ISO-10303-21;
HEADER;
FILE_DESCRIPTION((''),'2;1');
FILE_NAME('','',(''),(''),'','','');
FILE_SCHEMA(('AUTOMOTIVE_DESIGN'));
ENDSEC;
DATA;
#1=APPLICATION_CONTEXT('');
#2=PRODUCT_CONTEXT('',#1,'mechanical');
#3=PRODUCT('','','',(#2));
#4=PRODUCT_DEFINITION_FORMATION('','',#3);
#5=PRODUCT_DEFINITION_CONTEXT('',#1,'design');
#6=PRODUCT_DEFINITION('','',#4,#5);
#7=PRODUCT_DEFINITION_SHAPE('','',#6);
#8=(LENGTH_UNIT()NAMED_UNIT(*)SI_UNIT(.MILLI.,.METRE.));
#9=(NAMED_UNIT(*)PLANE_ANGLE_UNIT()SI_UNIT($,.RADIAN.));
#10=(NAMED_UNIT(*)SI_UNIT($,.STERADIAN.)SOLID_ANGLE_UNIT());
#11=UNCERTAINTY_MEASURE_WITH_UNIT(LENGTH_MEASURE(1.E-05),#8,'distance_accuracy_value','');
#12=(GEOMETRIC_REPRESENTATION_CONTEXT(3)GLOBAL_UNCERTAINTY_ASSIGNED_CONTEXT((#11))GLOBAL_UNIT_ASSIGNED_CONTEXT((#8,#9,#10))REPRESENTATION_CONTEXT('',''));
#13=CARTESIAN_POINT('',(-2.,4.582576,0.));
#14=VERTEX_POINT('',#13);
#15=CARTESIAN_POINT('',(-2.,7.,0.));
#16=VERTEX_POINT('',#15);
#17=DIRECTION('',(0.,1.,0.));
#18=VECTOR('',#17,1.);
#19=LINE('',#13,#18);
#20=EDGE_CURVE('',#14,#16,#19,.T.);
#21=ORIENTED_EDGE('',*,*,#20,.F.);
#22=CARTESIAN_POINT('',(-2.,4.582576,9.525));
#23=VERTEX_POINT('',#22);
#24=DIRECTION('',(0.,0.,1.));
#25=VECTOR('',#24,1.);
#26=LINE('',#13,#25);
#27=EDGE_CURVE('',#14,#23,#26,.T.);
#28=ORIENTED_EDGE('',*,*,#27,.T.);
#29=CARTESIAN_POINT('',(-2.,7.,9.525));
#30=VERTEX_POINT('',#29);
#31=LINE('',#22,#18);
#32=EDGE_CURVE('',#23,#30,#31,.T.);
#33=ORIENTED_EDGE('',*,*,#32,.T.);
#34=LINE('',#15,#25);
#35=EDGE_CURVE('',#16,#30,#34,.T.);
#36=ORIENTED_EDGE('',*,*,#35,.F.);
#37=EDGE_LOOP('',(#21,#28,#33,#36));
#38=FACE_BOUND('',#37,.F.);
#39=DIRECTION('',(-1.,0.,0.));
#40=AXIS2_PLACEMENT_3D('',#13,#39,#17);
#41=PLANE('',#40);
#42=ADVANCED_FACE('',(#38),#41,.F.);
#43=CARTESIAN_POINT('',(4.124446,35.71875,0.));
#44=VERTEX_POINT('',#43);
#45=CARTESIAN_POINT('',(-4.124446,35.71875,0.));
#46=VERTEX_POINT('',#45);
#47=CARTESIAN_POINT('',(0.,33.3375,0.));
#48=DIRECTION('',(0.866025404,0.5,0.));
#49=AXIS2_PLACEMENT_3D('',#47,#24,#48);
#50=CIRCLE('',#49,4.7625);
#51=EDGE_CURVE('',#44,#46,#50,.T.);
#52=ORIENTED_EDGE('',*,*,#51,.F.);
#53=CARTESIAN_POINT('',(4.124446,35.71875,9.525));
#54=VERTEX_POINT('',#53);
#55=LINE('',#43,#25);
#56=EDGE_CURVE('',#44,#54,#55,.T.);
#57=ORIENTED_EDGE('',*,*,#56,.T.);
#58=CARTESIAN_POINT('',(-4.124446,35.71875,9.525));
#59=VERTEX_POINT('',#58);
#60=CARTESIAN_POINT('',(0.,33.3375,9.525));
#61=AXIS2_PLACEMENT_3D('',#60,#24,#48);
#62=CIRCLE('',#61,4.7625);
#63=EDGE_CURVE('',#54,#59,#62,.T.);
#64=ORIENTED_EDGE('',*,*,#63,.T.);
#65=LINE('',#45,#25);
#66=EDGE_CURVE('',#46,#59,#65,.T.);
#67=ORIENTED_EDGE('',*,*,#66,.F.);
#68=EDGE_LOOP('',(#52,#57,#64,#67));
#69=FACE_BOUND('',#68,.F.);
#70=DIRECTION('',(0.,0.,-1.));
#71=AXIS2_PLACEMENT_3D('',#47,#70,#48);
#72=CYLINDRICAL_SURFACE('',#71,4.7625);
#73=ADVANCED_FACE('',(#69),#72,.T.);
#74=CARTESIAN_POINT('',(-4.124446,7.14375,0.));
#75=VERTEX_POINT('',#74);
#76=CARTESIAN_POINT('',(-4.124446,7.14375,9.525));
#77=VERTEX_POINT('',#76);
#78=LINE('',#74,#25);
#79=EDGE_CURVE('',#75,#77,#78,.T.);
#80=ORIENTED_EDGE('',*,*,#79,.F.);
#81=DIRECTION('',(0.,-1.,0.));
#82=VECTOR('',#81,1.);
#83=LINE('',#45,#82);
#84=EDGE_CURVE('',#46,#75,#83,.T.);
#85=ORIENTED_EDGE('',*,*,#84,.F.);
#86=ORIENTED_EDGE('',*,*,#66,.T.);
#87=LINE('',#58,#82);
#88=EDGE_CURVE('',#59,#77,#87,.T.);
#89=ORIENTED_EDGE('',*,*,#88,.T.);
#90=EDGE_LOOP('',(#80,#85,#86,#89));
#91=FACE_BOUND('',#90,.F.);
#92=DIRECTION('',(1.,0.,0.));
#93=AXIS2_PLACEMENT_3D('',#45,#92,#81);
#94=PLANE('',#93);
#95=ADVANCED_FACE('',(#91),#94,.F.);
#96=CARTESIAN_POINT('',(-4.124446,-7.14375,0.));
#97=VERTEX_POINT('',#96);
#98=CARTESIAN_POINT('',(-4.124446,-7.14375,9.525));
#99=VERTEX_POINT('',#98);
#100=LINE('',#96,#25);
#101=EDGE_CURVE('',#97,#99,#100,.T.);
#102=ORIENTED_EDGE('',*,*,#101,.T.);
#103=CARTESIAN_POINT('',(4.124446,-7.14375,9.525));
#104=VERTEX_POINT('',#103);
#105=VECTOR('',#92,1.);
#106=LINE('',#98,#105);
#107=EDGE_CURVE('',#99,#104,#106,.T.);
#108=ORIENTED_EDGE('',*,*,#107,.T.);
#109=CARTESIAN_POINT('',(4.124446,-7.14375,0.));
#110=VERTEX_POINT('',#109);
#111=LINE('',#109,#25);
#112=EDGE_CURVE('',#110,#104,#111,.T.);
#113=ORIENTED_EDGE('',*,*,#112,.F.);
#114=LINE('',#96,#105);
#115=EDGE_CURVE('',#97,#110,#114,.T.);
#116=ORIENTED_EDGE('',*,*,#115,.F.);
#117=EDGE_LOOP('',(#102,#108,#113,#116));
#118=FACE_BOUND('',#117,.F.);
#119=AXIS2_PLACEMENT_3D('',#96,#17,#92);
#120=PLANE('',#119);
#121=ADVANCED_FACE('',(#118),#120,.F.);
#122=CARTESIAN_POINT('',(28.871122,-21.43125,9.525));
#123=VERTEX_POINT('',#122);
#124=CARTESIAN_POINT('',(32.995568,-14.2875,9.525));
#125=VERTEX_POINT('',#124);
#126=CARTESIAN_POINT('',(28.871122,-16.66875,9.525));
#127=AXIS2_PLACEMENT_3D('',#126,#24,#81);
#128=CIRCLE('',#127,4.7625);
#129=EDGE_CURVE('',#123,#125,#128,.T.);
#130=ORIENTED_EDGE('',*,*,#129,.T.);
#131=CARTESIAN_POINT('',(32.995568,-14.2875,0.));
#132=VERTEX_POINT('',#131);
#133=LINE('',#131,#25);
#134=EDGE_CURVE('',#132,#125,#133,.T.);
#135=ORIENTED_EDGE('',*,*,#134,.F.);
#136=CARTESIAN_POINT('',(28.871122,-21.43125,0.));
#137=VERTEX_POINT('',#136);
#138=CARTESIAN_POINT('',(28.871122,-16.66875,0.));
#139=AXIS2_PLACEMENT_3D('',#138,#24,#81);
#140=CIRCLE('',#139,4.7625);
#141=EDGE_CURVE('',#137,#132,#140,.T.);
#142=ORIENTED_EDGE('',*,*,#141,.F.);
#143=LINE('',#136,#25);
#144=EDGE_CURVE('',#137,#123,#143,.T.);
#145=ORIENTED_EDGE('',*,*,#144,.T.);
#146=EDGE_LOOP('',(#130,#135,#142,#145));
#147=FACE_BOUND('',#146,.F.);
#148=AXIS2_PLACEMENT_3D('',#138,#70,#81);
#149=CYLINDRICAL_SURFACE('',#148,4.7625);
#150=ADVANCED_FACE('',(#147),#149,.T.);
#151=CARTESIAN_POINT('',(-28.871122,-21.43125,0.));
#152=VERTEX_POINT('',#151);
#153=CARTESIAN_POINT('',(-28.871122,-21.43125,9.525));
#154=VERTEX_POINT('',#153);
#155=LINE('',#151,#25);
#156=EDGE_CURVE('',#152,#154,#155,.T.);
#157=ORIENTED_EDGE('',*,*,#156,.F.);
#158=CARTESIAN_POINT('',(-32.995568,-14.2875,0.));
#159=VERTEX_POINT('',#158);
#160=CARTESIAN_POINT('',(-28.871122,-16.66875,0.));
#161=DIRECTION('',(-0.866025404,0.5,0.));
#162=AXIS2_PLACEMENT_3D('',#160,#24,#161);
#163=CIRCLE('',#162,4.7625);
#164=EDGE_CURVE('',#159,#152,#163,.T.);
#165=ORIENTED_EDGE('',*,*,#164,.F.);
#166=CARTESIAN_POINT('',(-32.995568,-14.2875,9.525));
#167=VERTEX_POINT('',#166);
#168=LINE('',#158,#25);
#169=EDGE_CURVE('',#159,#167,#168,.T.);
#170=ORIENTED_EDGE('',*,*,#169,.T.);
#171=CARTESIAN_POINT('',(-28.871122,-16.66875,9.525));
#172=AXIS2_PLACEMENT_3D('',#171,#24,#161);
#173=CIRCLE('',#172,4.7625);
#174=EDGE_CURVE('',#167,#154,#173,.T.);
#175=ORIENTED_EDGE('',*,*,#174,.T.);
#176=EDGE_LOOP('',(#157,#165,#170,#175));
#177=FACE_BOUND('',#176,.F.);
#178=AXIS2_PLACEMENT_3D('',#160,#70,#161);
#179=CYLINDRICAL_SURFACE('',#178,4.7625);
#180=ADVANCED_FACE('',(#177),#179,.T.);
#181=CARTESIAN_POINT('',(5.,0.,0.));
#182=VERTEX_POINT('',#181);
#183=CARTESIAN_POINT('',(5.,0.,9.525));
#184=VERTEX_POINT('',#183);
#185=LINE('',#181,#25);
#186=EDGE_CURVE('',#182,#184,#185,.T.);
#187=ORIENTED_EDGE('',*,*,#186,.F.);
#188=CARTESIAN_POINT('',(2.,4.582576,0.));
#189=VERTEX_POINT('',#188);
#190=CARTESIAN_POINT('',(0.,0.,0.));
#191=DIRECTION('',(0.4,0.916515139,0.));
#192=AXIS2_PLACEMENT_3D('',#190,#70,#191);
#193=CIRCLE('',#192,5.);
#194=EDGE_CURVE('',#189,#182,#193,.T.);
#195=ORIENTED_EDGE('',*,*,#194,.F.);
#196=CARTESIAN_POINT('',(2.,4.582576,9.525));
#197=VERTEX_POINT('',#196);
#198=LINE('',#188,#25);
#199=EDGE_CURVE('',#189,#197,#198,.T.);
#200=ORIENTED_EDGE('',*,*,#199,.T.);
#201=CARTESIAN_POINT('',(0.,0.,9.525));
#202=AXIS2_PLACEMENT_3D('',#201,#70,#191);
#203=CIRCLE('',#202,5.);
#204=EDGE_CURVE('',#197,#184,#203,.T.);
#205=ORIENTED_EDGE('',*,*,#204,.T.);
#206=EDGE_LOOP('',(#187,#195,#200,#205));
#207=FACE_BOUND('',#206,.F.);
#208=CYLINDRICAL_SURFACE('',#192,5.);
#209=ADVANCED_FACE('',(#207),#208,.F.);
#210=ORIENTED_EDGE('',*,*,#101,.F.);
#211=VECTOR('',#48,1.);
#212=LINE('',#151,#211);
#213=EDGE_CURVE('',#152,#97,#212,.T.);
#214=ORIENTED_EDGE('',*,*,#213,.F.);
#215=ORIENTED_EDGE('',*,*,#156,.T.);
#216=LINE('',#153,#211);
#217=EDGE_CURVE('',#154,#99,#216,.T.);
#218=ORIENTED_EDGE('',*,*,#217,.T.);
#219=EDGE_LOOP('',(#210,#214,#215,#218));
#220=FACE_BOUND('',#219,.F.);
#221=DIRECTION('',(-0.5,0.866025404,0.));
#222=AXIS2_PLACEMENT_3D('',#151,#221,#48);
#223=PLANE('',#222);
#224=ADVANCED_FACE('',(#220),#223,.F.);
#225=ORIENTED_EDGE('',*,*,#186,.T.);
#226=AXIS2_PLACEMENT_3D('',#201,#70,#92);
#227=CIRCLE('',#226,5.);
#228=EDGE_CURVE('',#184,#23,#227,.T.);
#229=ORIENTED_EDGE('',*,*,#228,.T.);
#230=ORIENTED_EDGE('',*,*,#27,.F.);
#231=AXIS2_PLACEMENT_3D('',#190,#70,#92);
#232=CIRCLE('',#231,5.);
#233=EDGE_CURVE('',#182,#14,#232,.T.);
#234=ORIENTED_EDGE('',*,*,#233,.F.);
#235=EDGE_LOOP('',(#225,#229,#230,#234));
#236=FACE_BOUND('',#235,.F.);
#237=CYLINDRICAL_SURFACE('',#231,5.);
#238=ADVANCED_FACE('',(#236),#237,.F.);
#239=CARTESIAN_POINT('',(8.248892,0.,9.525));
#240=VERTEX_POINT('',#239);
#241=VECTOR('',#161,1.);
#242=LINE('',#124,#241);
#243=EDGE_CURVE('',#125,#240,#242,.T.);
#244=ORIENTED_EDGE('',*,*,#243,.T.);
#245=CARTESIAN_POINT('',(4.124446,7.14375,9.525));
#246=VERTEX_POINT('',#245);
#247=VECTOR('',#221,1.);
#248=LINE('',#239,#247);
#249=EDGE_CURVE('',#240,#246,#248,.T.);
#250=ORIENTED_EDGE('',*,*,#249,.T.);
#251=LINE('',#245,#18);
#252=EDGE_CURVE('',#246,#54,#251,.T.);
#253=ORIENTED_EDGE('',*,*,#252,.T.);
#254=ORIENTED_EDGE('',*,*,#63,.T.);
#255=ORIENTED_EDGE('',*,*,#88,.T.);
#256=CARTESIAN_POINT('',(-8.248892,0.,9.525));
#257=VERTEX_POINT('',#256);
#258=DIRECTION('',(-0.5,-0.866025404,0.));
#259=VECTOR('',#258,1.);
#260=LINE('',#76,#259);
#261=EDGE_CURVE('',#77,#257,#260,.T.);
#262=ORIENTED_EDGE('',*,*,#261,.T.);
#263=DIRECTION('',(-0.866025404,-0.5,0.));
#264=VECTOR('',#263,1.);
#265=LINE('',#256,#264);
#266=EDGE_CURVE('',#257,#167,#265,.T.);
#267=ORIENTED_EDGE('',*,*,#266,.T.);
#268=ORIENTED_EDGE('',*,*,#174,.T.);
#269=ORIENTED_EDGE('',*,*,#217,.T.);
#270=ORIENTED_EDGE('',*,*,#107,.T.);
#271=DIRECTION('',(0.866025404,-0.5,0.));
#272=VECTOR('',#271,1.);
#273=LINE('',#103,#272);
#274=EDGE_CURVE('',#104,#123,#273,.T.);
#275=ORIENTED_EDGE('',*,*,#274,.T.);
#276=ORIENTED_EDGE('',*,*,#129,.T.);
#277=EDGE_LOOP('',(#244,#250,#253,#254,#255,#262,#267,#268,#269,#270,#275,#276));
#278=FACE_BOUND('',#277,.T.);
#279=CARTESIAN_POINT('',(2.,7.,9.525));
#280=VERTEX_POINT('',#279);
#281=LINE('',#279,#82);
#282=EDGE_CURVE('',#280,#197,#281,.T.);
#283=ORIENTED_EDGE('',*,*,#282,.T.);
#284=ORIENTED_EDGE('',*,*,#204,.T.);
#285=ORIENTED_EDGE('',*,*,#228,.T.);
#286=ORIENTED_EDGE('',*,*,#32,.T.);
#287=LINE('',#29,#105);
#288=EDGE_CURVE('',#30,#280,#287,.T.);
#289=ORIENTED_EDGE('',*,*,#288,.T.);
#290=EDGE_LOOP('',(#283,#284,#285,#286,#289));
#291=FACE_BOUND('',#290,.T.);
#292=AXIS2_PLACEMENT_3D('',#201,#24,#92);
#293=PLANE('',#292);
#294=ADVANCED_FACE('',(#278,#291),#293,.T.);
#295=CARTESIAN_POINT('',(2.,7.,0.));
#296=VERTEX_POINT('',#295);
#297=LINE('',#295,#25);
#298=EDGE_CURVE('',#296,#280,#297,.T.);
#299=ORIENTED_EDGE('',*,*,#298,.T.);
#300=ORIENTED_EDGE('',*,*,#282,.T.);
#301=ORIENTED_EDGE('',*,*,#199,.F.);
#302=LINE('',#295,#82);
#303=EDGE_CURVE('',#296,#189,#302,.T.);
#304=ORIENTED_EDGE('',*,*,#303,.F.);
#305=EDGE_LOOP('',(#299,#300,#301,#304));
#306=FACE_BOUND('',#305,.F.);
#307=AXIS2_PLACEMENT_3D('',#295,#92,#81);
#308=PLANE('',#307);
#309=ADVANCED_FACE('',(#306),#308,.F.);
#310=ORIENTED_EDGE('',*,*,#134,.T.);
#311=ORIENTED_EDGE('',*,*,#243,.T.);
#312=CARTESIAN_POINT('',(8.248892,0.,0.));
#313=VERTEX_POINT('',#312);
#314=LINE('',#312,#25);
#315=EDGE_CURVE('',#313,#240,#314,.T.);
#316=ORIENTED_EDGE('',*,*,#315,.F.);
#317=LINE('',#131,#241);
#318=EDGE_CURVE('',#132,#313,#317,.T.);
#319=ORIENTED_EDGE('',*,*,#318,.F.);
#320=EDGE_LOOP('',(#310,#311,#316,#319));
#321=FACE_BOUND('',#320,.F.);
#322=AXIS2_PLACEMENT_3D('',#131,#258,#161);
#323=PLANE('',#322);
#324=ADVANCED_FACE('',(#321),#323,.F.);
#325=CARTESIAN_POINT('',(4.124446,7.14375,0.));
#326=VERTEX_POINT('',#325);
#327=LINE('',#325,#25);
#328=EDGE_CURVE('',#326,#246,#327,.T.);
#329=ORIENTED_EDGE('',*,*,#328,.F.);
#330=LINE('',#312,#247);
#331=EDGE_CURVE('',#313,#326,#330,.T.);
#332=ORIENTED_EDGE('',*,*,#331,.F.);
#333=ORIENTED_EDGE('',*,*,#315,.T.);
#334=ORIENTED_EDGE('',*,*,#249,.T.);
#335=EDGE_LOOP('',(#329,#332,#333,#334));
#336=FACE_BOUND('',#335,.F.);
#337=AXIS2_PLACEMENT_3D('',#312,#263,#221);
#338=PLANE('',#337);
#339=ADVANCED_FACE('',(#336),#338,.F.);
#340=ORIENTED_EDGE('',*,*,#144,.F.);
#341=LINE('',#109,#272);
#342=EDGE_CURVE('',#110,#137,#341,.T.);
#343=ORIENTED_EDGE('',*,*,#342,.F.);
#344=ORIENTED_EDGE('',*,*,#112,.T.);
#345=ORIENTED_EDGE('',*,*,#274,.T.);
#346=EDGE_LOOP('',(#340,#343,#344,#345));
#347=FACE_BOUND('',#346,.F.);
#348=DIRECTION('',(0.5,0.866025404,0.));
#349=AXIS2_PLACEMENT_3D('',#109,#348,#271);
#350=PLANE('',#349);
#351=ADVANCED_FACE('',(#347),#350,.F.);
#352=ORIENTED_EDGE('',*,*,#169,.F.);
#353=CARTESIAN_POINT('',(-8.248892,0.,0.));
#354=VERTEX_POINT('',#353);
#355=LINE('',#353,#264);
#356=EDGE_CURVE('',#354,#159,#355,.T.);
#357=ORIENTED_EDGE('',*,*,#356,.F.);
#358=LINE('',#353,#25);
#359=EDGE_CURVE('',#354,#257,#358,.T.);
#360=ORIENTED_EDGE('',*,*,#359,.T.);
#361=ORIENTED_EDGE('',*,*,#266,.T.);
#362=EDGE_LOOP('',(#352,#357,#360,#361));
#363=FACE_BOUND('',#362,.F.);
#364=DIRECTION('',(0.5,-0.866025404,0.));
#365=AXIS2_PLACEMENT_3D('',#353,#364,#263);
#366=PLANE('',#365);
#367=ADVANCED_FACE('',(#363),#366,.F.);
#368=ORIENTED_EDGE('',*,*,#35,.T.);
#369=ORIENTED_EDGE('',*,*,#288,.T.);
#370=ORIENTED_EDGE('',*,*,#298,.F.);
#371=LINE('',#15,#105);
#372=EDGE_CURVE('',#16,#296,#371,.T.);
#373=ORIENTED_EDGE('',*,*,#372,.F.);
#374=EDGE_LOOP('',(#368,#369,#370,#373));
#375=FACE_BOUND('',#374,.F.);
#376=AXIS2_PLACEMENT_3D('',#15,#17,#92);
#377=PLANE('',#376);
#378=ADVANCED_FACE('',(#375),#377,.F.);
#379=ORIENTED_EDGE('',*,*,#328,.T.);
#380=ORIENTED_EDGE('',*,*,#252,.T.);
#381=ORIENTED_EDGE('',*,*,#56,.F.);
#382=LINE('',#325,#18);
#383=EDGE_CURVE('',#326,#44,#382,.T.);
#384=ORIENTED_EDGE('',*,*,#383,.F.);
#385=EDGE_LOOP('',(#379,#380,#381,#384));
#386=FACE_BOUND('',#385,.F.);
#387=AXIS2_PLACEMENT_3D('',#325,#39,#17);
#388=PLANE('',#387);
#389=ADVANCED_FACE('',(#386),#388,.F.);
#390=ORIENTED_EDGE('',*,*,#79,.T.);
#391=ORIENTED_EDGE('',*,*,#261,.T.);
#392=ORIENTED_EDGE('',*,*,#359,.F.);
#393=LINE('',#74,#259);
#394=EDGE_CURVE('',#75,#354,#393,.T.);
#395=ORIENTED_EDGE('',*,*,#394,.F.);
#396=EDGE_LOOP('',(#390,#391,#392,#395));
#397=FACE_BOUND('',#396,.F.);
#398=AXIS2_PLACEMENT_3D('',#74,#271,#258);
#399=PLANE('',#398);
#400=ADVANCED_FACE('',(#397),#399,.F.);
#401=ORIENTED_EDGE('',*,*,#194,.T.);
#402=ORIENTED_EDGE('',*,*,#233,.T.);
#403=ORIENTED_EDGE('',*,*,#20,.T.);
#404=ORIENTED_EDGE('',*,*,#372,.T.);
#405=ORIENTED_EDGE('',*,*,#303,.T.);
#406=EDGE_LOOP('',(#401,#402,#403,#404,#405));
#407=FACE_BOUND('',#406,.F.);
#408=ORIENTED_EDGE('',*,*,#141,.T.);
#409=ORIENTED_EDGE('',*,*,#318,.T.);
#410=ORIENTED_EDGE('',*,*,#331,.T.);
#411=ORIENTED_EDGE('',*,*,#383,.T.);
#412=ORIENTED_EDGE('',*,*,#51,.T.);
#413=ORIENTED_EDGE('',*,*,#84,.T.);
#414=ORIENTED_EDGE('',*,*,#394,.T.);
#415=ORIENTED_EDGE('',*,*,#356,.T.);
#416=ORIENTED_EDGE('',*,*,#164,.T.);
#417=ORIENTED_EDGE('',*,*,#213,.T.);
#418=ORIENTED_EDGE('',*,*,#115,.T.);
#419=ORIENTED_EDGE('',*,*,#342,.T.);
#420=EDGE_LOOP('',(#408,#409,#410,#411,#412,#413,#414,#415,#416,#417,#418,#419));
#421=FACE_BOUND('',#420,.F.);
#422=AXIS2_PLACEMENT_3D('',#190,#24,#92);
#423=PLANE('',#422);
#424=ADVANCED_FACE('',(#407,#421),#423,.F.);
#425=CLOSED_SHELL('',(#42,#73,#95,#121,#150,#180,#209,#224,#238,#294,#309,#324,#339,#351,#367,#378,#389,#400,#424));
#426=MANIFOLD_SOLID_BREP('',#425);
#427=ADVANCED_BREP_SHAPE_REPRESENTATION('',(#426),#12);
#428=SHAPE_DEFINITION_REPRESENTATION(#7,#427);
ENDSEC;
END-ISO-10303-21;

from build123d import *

# Parameters (mm, degrees)
F2_DEPTH = 9.525


# Not quite as in the source:
# - a variable given as a bare number and used for a length is read in inches; the dataset says mm whatever the document's units were


with BuildPart() as f2:
    # F1 (on Top) → F2 (new body)
    with BuildSketch(Plane.XY):
        with BuildLine():
            Line((4.1244459855, 7.14375), (4.1244459855, 35.71875))
            ThreePointArc((4.1244459855, 35.71875), (0, 38.1), (-4.1244459855, 35.71875))
            Line((-4.1244459855, 35.71875), (-4.1244459855, 7.14375))
            Line((-4.1244459855, 7.14375), (-8.248891971, 0))
            Line((-8.248891971, 0), (-32.9955678842, -14.2875))
            ThreePointArc((-32.9955678842, -14.2875), (-32.9955678842, -19.05), (-28.8711218987, -21.43125))
            Line((-28.8711218987, -21.43125), (-4.1244459855, -7.14375))
            Line((-4.1244459855, -7.14375), (4.1244459855, -7.14375))
            Line((4.1244459855, -7.14375), (28.8711218987, -21.43125))
            ThreePointArc((28.8711218987, -21.43125), (32.9955678842, -19.05), (32.9955678842, -14.2875))
            Line((32.9955678842, -14.2875), (8.248891971, 0))
            Line((8.248891971, 0), (4.1244459855, 7.14375))
        make_face()
        with BuildLine():
            ThreePointArc((2, 4.582575695), (4.1833001327, 2.7386127875), (5, 0))
            ThreePointArc((5, 0), (-2.7386127875, -4.1833001327), (-2, 4.582575695))
            Line((-2, 4.582575695), (-2, 7))
            Line((-2, 7), (2, 7))
            Line((2, 7), (2, 4.582575695))
        make_face(mode=Mode.SUBTRACT)
    extrude(amount=F2_DEPTH)


solid = f2.part
